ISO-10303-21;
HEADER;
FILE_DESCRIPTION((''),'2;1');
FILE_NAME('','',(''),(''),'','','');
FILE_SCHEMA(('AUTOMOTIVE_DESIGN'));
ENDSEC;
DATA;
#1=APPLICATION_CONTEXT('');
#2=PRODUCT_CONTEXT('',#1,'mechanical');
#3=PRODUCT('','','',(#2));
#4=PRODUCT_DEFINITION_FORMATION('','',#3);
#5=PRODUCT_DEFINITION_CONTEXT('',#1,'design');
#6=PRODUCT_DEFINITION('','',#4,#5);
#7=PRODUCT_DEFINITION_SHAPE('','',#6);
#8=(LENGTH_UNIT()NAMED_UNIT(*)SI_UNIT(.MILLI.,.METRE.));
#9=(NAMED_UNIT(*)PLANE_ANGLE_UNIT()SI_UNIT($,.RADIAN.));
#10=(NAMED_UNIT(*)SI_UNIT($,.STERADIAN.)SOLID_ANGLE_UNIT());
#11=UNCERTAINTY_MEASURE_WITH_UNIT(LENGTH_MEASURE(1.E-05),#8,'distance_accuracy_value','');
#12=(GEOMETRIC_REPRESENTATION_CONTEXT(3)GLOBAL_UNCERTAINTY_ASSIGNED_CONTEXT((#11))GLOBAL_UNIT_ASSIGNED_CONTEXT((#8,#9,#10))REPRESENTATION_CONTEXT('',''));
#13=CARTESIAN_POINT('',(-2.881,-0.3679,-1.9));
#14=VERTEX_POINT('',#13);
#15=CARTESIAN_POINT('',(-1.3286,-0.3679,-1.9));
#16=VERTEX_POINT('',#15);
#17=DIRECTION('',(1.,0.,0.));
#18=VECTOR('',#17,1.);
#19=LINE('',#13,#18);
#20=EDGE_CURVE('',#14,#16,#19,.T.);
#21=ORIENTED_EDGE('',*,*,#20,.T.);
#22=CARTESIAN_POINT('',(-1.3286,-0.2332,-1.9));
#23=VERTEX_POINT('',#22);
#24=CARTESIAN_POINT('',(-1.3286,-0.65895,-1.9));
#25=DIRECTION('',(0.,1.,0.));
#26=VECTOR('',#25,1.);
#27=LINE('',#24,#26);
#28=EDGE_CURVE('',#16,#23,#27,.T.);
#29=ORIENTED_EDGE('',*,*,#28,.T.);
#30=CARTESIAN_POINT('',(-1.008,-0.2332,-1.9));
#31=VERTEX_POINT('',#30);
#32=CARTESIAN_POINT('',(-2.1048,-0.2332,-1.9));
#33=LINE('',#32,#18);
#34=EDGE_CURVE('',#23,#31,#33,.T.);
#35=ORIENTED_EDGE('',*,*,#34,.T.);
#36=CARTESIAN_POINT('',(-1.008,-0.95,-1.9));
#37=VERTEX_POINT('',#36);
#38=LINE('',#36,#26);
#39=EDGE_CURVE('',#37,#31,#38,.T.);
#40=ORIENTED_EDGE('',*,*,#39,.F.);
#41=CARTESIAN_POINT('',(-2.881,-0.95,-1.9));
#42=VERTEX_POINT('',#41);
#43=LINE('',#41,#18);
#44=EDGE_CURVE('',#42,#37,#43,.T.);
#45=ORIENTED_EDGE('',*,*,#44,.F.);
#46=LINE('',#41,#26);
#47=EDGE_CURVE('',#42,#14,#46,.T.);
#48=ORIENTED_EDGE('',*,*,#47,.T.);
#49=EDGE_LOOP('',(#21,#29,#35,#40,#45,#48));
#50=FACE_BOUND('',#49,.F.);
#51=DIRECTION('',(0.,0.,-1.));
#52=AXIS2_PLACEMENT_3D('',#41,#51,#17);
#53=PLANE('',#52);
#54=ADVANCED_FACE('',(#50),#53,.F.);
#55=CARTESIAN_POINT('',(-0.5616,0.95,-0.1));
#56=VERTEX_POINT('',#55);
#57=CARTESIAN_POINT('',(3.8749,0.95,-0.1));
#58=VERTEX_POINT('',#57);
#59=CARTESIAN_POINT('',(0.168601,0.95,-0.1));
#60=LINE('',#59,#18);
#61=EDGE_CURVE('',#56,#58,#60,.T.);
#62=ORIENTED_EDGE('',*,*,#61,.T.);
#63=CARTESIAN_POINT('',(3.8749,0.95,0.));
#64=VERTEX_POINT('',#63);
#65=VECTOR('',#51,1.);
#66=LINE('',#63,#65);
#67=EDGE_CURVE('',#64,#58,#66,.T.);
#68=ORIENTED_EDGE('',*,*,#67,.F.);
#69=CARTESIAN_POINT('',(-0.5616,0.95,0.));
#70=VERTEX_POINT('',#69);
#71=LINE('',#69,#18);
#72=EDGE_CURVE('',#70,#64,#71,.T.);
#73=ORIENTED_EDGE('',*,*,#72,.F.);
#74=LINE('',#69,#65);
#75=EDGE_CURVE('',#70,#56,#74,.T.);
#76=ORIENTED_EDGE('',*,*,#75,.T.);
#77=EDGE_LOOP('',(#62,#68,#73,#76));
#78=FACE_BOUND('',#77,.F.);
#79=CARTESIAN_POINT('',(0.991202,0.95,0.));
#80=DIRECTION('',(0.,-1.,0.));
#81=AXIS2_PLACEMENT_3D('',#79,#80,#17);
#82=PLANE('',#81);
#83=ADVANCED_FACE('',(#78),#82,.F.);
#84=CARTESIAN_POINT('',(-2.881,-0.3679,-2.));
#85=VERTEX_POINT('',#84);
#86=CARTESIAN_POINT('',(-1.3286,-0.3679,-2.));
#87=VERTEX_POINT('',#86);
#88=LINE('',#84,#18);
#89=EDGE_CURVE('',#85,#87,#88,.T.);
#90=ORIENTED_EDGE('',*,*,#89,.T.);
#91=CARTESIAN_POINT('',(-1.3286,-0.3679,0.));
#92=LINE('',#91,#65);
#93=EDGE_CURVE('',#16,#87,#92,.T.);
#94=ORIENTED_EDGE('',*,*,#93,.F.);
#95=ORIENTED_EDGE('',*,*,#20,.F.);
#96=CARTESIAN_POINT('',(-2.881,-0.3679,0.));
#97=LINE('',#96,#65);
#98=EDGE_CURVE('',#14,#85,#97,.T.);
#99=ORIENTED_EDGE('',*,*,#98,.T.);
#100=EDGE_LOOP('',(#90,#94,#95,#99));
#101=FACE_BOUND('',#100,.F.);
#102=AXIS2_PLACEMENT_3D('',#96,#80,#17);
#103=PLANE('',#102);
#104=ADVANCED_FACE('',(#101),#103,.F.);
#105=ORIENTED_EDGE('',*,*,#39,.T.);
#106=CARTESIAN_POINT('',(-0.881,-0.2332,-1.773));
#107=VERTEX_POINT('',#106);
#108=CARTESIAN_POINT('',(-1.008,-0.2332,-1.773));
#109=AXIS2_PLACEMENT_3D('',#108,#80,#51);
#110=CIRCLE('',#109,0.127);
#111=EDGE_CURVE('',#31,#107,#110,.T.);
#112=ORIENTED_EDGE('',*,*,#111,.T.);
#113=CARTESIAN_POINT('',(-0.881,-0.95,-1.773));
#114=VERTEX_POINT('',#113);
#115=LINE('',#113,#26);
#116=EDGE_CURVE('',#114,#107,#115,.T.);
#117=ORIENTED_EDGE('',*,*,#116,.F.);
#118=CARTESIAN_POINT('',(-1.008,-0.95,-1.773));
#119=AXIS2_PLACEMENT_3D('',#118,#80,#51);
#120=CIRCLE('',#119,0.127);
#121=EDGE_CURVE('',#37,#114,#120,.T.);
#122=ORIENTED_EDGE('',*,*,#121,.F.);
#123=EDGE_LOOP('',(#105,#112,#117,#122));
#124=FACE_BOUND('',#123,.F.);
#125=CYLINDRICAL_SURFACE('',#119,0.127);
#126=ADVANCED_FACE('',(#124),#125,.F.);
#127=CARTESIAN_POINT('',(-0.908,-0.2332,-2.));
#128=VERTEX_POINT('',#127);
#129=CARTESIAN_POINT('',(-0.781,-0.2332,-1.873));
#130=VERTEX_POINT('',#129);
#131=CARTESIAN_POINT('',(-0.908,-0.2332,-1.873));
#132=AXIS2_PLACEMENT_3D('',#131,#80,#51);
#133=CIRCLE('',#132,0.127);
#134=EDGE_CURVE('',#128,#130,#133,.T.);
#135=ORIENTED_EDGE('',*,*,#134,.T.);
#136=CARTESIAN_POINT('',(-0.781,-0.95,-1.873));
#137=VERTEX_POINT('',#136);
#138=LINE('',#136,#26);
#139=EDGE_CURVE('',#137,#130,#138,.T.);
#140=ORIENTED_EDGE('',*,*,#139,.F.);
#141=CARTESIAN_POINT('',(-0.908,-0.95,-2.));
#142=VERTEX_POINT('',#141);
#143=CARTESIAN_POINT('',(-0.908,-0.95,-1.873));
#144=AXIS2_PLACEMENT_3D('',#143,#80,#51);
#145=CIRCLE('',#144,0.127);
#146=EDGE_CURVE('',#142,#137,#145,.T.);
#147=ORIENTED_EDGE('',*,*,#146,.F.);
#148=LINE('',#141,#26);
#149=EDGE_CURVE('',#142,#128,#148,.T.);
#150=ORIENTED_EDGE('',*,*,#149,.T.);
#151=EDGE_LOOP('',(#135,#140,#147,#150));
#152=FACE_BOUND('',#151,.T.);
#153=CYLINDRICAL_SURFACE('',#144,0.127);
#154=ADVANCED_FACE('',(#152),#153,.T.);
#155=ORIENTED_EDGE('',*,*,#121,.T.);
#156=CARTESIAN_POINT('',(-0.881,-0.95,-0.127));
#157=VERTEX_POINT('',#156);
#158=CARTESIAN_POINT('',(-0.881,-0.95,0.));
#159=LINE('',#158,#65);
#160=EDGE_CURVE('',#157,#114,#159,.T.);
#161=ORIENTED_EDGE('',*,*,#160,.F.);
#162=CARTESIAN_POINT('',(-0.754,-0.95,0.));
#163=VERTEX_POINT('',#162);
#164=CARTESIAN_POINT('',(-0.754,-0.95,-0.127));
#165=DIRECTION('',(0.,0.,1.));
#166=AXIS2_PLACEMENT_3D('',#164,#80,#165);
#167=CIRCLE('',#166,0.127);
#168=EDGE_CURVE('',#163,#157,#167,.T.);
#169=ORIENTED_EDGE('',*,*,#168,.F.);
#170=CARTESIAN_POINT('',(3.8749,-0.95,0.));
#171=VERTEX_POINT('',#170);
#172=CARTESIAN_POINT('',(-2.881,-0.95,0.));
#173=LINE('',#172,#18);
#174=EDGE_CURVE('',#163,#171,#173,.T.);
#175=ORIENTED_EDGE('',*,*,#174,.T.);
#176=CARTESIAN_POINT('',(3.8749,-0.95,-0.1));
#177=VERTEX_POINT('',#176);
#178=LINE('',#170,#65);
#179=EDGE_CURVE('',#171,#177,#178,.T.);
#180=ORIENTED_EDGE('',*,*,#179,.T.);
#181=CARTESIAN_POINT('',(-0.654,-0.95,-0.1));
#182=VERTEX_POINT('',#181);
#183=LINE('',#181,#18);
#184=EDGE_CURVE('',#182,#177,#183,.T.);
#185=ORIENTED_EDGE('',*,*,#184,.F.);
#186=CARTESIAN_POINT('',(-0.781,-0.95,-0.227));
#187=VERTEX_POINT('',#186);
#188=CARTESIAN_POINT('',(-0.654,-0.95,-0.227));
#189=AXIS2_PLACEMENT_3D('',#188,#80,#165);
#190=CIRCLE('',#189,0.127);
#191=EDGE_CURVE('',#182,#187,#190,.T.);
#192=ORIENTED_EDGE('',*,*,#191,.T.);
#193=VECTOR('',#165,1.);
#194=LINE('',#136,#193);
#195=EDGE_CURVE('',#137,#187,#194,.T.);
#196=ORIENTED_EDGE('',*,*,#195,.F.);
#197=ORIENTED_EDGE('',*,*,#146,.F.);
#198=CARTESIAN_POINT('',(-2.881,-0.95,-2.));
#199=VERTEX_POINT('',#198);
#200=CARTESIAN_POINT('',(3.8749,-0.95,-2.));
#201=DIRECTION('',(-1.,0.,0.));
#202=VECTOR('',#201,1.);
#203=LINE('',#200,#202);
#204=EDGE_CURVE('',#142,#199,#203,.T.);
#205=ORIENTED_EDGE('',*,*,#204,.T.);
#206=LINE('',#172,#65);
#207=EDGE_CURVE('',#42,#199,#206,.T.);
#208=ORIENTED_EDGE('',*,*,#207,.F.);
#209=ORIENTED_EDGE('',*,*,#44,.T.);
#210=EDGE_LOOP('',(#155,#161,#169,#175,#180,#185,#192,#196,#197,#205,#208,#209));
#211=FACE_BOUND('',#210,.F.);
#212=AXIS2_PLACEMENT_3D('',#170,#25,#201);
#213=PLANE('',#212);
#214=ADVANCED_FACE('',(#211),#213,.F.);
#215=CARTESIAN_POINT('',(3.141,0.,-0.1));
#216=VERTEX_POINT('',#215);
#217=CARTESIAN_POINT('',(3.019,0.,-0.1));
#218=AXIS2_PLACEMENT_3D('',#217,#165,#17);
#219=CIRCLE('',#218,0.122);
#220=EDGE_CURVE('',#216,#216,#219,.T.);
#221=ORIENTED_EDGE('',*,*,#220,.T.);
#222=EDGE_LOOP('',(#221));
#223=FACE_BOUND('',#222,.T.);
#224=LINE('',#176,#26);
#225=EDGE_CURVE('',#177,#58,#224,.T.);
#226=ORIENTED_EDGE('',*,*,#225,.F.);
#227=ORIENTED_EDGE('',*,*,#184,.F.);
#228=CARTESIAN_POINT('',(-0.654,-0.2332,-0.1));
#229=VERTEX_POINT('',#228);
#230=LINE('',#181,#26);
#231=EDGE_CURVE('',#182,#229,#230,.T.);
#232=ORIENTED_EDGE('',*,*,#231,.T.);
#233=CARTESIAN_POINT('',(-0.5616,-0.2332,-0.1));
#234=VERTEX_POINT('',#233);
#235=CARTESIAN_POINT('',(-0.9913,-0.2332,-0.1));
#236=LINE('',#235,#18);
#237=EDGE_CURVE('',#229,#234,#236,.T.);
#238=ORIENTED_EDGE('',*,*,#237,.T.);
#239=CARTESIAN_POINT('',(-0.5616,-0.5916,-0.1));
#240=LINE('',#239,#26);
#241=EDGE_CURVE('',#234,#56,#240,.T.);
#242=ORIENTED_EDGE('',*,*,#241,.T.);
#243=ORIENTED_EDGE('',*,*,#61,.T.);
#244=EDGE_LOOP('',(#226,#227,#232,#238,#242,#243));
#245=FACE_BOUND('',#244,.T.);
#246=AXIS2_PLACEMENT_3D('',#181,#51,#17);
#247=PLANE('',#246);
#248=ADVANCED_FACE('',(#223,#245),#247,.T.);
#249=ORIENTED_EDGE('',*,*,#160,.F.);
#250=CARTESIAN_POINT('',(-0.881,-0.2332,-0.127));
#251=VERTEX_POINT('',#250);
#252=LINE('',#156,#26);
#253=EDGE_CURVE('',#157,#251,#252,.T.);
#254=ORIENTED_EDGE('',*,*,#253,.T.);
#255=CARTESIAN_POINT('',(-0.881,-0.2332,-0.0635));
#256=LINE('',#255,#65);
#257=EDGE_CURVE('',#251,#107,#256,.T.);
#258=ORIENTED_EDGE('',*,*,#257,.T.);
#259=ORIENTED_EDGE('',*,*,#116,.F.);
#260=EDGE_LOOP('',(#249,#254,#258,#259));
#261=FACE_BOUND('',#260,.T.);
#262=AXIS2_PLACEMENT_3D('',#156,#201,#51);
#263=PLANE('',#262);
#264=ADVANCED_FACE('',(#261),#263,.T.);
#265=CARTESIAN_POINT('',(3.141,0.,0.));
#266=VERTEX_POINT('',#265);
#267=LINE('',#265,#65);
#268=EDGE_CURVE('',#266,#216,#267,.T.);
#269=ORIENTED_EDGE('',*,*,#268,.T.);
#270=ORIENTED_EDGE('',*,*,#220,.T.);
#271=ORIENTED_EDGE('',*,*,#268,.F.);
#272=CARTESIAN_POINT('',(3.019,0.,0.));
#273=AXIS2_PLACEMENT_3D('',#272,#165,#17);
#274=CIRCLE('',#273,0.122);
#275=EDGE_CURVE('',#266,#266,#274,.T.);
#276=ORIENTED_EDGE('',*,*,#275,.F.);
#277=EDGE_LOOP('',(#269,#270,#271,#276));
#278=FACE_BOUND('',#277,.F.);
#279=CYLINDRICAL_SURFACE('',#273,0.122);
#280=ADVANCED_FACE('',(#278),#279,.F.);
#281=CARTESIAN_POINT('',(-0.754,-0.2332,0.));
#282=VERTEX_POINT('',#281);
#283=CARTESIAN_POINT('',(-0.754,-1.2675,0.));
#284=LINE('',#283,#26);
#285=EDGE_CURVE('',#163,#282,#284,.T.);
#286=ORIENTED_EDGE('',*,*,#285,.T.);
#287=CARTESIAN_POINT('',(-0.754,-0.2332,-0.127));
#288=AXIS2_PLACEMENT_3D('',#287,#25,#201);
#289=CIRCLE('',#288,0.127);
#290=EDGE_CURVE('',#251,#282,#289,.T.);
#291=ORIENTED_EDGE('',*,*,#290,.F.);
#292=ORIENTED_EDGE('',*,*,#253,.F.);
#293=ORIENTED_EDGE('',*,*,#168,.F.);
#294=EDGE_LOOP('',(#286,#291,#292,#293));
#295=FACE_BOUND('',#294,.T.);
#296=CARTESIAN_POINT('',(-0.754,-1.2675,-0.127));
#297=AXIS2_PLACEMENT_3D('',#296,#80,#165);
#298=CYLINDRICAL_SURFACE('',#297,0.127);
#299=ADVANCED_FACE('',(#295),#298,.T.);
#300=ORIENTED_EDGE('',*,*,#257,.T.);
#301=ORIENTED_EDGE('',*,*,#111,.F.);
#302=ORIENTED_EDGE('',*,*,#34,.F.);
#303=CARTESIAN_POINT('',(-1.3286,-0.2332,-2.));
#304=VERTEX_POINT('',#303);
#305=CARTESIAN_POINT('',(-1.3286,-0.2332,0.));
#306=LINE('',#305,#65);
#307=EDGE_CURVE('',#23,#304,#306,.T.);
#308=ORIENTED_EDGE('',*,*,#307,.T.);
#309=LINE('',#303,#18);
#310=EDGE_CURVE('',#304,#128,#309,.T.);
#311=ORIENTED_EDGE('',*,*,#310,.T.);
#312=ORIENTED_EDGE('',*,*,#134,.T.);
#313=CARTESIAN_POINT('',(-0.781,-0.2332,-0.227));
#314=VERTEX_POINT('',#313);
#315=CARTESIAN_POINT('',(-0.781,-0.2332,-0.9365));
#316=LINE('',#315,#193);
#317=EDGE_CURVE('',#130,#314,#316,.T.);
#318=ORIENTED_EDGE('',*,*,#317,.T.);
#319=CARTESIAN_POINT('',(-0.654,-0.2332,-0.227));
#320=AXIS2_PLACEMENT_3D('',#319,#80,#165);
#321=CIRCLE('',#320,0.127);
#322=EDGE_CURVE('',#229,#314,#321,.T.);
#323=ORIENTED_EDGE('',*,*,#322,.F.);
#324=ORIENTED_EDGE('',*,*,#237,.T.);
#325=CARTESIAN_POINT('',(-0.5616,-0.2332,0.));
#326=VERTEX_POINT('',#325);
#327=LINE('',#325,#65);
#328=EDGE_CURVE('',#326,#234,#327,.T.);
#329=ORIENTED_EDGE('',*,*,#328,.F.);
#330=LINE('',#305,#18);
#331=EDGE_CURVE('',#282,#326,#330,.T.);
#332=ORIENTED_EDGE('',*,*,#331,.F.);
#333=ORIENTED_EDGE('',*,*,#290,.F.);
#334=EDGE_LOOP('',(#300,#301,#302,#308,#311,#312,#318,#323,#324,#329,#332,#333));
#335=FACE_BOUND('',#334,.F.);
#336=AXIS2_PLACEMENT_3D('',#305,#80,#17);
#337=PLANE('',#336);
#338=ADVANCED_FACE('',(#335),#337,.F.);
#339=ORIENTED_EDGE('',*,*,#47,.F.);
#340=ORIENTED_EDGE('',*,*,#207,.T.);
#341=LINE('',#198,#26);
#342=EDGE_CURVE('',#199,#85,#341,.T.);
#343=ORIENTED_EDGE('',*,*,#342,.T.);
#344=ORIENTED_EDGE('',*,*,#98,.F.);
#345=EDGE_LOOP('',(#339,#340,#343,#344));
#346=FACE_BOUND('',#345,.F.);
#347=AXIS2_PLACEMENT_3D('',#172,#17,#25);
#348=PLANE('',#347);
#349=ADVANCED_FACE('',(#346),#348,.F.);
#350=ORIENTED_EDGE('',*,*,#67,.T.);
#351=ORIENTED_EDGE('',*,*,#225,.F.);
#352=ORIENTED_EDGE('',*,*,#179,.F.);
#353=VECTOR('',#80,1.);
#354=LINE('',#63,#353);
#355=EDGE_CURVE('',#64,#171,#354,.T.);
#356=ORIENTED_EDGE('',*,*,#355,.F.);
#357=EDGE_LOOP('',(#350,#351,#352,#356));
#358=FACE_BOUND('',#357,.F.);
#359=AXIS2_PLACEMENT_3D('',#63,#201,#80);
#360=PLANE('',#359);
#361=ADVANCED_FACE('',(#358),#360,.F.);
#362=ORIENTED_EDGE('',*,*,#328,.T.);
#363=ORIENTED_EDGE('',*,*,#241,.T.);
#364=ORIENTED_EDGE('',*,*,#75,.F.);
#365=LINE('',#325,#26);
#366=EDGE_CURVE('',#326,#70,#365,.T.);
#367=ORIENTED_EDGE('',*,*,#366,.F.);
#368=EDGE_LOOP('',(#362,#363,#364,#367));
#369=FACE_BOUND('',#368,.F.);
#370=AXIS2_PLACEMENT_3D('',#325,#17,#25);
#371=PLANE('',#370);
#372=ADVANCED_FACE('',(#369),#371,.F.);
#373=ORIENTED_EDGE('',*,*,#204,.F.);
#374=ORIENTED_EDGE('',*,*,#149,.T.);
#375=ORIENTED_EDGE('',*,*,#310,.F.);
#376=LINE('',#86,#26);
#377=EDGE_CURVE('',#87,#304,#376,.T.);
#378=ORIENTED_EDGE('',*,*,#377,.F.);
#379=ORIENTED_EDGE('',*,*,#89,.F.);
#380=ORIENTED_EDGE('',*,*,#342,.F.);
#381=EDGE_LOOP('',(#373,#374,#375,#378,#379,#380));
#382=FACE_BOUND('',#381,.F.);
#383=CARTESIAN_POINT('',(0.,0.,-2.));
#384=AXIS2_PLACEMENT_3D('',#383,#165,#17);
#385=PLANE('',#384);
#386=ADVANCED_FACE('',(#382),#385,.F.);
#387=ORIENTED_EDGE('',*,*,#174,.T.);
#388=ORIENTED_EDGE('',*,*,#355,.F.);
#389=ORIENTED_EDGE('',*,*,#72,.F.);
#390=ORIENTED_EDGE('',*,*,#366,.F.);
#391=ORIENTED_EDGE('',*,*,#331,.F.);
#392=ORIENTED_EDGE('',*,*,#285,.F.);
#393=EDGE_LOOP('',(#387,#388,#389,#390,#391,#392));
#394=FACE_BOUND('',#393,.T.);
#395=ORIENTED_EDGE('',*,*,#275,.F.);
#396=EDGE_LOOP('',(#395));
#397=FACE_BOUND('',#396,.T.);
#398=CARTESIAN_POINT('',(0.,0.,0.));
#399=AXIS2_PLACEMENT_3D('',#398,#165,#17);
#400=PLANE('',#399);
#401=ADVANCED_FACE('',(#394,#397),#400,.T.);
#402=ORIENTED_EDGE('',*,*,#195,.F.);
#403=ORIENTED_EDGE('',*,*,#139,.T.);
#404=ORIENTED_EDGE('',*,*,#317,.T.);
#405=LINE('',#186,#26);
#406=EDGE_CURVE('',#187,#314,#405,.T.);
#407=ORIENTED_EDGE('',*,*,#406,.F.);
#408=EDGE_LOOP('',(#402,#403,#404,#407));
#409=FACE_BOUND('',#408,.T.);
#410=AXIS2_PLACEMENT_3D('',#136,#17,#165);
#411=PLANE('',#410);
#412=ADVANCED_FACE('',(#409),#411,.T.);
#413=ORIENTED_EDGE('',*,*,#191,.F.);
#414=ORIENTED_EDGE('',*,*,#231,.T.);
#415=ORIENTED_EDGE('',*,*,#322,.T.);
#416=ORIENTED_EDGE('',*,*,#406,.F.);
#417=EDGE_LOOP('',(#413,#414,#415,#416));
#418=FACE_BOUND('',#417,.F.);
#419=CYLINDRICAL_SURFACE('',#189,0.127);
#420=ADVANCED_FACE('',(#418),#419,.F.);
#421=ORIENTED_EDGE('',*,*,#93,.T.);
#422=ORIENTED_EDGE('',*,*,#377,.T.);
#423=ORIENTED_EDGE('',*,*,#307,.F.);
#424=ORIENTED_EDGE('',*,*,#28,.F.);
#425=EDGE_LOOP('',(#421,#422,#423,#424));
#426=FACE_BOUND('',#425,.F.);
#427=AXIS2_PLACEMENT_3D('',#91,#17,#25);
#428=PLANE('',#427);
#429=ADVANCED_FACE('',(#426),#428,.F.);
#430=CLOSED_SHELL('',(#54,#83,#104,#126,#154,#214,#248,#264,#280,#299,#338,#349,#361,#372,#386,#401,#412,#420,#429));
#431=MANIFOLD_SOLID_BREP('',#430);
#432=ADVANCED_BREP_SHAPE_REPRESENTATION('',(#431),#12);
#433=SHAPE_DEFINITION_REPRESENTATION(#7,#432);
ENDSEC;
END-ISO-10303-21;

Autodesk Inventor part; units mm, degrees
ref_plane "YZ Plane" through (0, 0, 0) normal (1, 0, 0) x (0, 1, 0)
ref_plane "XZ Plane" through (0, 0, 0) normal (0, 1, 0) x (-1, 0, 0)
ref_plane "XY Plane" through (0, 0, 0) normal (0, 0, 1) x (1, 0, 0)
sketch "Sketch1" plane through (0, 0, 0) normal (0, 0, 1) x (1, 0, 0)
  circle A0 centre (3.019, 0) radius 2.2393 projected
  line L0 (3.8749, -0.95) -> (-0.5616, -0.95)
  line L1 (-0.5616, -0.2332) -> (-0.5616, 0.95)
  line L2 (-0.5616, 0.95) -> (3.8749, 0.95)
  line L3 (3.8749, 0.95) -> (3.8749, -0.95)
  line L4 (3.019, 0) -> (-3.8164, 0) construction
  line L5 (-0.5616, -0.95) -> (-2.881, -0.95)
  line L6 (-2.881, -0.95) -> (-2.881, -0.3679)
  line L7 (-2.881, -0.3679) -> (-1.3286, -0.3679)
  circle A1 centre (3.019, 0) radius 3.4 projected
  line L8 (-0.5616, -0.95) -> (-1.3286, -0.95)
  line L9 (-1.3286, -0.3679) -> (-1.3286, -0.2332)
  line L10 (-1.3286, -0.2332) -> (-0.5616, -0.2332)
  circle A2 centre (3.019, 0) radius 0.122
  point P0 (0, 0)
  dimension "d0" = 5.9
  dimension "d1" = 6.8
  dimension "d13" = 1.9
  dimension "d14" = 0.95
extrude "Extrusion1" add sketch "Sketch1" against normal blind 2 contours L2 L3 L0 A0 | A0 L0 A1 L2 | A1 L0 L5 L6 L7 L9 L10 L1 L2 picked at (2.6128, -0.6709) picked at (0.0739, 0.5857)
sketch "Sketch2" plane through (-2.881, -0.95, 0) normal (0, -1, 0) x (1, 0, 0)
  line L0 (6.7559, 0) -> (0, 0) projected
  line L1 (0, 0) -> (0, -2) projected
  line L2 (6.7559, -2) -> (0, -2) projected
  line L3 (6.7559, 0) -> (6.7559, -2) projected
  line L4 (0, -1.9) -> (1.873, -1.9)
  line L5 (2.227, -0.1) -> (6.7559, -0.1)
  line L6 (2.1, -1.873) -> (2.1, -0.227)
  line L7 (2, 0) -> (2, -1.773)
  arc A0 (1.873, -1.9) -> (2, -1.773) centre (1.873, -1.773) ccw
  arc A1 (2.227, -0.1) -> (2.1, -0.227) centre (2.227, -0.227) ccw
  line L8 (2.1, -1.9) -> (2.1, -2)
  line L9 (1.973, -2) -> (0, -2)
  line L10 (0, -2) -> (0, -1.9)
  line L11 (2.127, 0) -> (6.7559, 0)
  line L12 (6.7559, 0) -> (6.7559, -0.1)
  line L13 (2, -0.1) -> (2, -0.127)
  arc A2 (2.127, 0) -> (2, -0.127) centre (2.127, -0.127) ccw
  arc A3 (1.973, -2) -> (2.1, -1.873) centre (1.973, -1.873) ccw
  line L14 (6.7559, -0.1) -> (2.227, -0.1)
  line L15 (2.0029, -0.1) -> (2, -0.1)
  line L16 (0, -1.9) -> (1.873, -1.9)
  line L17 (2.0971, -1.9) -> (2.1, -1.9)
  point P0 (2.881, 0)
  point P1 (6.7559, -1.9)
  point P2 (0, -0.1)
  point P3 (2.1, 0)
  point P4 (2, -2)
  dimension "d4" = 0.1
  dimension "d5" = 0.1
  dimension "d6" = 2.1
  dimension "d7" = 0.1
  dimension "d8" = 0.127
  dimension "d9" = 0.127
extrude "Extrusion2" cut sketch "Sketch2" against normal blind 2 contours L3 L5 A1 L6 A3 L2 L1 L4 A0 L7 A2 L0 | A2 L15 L7 L0 keep common part
fillet "Fillet1" radius 0.127 1 edges at (-0.881, -0.5916, 0)
equation "\"d14\" = 0.5 * d13"
properties part number "PosTerm" material "Nickel-Copper Alloy 400"
